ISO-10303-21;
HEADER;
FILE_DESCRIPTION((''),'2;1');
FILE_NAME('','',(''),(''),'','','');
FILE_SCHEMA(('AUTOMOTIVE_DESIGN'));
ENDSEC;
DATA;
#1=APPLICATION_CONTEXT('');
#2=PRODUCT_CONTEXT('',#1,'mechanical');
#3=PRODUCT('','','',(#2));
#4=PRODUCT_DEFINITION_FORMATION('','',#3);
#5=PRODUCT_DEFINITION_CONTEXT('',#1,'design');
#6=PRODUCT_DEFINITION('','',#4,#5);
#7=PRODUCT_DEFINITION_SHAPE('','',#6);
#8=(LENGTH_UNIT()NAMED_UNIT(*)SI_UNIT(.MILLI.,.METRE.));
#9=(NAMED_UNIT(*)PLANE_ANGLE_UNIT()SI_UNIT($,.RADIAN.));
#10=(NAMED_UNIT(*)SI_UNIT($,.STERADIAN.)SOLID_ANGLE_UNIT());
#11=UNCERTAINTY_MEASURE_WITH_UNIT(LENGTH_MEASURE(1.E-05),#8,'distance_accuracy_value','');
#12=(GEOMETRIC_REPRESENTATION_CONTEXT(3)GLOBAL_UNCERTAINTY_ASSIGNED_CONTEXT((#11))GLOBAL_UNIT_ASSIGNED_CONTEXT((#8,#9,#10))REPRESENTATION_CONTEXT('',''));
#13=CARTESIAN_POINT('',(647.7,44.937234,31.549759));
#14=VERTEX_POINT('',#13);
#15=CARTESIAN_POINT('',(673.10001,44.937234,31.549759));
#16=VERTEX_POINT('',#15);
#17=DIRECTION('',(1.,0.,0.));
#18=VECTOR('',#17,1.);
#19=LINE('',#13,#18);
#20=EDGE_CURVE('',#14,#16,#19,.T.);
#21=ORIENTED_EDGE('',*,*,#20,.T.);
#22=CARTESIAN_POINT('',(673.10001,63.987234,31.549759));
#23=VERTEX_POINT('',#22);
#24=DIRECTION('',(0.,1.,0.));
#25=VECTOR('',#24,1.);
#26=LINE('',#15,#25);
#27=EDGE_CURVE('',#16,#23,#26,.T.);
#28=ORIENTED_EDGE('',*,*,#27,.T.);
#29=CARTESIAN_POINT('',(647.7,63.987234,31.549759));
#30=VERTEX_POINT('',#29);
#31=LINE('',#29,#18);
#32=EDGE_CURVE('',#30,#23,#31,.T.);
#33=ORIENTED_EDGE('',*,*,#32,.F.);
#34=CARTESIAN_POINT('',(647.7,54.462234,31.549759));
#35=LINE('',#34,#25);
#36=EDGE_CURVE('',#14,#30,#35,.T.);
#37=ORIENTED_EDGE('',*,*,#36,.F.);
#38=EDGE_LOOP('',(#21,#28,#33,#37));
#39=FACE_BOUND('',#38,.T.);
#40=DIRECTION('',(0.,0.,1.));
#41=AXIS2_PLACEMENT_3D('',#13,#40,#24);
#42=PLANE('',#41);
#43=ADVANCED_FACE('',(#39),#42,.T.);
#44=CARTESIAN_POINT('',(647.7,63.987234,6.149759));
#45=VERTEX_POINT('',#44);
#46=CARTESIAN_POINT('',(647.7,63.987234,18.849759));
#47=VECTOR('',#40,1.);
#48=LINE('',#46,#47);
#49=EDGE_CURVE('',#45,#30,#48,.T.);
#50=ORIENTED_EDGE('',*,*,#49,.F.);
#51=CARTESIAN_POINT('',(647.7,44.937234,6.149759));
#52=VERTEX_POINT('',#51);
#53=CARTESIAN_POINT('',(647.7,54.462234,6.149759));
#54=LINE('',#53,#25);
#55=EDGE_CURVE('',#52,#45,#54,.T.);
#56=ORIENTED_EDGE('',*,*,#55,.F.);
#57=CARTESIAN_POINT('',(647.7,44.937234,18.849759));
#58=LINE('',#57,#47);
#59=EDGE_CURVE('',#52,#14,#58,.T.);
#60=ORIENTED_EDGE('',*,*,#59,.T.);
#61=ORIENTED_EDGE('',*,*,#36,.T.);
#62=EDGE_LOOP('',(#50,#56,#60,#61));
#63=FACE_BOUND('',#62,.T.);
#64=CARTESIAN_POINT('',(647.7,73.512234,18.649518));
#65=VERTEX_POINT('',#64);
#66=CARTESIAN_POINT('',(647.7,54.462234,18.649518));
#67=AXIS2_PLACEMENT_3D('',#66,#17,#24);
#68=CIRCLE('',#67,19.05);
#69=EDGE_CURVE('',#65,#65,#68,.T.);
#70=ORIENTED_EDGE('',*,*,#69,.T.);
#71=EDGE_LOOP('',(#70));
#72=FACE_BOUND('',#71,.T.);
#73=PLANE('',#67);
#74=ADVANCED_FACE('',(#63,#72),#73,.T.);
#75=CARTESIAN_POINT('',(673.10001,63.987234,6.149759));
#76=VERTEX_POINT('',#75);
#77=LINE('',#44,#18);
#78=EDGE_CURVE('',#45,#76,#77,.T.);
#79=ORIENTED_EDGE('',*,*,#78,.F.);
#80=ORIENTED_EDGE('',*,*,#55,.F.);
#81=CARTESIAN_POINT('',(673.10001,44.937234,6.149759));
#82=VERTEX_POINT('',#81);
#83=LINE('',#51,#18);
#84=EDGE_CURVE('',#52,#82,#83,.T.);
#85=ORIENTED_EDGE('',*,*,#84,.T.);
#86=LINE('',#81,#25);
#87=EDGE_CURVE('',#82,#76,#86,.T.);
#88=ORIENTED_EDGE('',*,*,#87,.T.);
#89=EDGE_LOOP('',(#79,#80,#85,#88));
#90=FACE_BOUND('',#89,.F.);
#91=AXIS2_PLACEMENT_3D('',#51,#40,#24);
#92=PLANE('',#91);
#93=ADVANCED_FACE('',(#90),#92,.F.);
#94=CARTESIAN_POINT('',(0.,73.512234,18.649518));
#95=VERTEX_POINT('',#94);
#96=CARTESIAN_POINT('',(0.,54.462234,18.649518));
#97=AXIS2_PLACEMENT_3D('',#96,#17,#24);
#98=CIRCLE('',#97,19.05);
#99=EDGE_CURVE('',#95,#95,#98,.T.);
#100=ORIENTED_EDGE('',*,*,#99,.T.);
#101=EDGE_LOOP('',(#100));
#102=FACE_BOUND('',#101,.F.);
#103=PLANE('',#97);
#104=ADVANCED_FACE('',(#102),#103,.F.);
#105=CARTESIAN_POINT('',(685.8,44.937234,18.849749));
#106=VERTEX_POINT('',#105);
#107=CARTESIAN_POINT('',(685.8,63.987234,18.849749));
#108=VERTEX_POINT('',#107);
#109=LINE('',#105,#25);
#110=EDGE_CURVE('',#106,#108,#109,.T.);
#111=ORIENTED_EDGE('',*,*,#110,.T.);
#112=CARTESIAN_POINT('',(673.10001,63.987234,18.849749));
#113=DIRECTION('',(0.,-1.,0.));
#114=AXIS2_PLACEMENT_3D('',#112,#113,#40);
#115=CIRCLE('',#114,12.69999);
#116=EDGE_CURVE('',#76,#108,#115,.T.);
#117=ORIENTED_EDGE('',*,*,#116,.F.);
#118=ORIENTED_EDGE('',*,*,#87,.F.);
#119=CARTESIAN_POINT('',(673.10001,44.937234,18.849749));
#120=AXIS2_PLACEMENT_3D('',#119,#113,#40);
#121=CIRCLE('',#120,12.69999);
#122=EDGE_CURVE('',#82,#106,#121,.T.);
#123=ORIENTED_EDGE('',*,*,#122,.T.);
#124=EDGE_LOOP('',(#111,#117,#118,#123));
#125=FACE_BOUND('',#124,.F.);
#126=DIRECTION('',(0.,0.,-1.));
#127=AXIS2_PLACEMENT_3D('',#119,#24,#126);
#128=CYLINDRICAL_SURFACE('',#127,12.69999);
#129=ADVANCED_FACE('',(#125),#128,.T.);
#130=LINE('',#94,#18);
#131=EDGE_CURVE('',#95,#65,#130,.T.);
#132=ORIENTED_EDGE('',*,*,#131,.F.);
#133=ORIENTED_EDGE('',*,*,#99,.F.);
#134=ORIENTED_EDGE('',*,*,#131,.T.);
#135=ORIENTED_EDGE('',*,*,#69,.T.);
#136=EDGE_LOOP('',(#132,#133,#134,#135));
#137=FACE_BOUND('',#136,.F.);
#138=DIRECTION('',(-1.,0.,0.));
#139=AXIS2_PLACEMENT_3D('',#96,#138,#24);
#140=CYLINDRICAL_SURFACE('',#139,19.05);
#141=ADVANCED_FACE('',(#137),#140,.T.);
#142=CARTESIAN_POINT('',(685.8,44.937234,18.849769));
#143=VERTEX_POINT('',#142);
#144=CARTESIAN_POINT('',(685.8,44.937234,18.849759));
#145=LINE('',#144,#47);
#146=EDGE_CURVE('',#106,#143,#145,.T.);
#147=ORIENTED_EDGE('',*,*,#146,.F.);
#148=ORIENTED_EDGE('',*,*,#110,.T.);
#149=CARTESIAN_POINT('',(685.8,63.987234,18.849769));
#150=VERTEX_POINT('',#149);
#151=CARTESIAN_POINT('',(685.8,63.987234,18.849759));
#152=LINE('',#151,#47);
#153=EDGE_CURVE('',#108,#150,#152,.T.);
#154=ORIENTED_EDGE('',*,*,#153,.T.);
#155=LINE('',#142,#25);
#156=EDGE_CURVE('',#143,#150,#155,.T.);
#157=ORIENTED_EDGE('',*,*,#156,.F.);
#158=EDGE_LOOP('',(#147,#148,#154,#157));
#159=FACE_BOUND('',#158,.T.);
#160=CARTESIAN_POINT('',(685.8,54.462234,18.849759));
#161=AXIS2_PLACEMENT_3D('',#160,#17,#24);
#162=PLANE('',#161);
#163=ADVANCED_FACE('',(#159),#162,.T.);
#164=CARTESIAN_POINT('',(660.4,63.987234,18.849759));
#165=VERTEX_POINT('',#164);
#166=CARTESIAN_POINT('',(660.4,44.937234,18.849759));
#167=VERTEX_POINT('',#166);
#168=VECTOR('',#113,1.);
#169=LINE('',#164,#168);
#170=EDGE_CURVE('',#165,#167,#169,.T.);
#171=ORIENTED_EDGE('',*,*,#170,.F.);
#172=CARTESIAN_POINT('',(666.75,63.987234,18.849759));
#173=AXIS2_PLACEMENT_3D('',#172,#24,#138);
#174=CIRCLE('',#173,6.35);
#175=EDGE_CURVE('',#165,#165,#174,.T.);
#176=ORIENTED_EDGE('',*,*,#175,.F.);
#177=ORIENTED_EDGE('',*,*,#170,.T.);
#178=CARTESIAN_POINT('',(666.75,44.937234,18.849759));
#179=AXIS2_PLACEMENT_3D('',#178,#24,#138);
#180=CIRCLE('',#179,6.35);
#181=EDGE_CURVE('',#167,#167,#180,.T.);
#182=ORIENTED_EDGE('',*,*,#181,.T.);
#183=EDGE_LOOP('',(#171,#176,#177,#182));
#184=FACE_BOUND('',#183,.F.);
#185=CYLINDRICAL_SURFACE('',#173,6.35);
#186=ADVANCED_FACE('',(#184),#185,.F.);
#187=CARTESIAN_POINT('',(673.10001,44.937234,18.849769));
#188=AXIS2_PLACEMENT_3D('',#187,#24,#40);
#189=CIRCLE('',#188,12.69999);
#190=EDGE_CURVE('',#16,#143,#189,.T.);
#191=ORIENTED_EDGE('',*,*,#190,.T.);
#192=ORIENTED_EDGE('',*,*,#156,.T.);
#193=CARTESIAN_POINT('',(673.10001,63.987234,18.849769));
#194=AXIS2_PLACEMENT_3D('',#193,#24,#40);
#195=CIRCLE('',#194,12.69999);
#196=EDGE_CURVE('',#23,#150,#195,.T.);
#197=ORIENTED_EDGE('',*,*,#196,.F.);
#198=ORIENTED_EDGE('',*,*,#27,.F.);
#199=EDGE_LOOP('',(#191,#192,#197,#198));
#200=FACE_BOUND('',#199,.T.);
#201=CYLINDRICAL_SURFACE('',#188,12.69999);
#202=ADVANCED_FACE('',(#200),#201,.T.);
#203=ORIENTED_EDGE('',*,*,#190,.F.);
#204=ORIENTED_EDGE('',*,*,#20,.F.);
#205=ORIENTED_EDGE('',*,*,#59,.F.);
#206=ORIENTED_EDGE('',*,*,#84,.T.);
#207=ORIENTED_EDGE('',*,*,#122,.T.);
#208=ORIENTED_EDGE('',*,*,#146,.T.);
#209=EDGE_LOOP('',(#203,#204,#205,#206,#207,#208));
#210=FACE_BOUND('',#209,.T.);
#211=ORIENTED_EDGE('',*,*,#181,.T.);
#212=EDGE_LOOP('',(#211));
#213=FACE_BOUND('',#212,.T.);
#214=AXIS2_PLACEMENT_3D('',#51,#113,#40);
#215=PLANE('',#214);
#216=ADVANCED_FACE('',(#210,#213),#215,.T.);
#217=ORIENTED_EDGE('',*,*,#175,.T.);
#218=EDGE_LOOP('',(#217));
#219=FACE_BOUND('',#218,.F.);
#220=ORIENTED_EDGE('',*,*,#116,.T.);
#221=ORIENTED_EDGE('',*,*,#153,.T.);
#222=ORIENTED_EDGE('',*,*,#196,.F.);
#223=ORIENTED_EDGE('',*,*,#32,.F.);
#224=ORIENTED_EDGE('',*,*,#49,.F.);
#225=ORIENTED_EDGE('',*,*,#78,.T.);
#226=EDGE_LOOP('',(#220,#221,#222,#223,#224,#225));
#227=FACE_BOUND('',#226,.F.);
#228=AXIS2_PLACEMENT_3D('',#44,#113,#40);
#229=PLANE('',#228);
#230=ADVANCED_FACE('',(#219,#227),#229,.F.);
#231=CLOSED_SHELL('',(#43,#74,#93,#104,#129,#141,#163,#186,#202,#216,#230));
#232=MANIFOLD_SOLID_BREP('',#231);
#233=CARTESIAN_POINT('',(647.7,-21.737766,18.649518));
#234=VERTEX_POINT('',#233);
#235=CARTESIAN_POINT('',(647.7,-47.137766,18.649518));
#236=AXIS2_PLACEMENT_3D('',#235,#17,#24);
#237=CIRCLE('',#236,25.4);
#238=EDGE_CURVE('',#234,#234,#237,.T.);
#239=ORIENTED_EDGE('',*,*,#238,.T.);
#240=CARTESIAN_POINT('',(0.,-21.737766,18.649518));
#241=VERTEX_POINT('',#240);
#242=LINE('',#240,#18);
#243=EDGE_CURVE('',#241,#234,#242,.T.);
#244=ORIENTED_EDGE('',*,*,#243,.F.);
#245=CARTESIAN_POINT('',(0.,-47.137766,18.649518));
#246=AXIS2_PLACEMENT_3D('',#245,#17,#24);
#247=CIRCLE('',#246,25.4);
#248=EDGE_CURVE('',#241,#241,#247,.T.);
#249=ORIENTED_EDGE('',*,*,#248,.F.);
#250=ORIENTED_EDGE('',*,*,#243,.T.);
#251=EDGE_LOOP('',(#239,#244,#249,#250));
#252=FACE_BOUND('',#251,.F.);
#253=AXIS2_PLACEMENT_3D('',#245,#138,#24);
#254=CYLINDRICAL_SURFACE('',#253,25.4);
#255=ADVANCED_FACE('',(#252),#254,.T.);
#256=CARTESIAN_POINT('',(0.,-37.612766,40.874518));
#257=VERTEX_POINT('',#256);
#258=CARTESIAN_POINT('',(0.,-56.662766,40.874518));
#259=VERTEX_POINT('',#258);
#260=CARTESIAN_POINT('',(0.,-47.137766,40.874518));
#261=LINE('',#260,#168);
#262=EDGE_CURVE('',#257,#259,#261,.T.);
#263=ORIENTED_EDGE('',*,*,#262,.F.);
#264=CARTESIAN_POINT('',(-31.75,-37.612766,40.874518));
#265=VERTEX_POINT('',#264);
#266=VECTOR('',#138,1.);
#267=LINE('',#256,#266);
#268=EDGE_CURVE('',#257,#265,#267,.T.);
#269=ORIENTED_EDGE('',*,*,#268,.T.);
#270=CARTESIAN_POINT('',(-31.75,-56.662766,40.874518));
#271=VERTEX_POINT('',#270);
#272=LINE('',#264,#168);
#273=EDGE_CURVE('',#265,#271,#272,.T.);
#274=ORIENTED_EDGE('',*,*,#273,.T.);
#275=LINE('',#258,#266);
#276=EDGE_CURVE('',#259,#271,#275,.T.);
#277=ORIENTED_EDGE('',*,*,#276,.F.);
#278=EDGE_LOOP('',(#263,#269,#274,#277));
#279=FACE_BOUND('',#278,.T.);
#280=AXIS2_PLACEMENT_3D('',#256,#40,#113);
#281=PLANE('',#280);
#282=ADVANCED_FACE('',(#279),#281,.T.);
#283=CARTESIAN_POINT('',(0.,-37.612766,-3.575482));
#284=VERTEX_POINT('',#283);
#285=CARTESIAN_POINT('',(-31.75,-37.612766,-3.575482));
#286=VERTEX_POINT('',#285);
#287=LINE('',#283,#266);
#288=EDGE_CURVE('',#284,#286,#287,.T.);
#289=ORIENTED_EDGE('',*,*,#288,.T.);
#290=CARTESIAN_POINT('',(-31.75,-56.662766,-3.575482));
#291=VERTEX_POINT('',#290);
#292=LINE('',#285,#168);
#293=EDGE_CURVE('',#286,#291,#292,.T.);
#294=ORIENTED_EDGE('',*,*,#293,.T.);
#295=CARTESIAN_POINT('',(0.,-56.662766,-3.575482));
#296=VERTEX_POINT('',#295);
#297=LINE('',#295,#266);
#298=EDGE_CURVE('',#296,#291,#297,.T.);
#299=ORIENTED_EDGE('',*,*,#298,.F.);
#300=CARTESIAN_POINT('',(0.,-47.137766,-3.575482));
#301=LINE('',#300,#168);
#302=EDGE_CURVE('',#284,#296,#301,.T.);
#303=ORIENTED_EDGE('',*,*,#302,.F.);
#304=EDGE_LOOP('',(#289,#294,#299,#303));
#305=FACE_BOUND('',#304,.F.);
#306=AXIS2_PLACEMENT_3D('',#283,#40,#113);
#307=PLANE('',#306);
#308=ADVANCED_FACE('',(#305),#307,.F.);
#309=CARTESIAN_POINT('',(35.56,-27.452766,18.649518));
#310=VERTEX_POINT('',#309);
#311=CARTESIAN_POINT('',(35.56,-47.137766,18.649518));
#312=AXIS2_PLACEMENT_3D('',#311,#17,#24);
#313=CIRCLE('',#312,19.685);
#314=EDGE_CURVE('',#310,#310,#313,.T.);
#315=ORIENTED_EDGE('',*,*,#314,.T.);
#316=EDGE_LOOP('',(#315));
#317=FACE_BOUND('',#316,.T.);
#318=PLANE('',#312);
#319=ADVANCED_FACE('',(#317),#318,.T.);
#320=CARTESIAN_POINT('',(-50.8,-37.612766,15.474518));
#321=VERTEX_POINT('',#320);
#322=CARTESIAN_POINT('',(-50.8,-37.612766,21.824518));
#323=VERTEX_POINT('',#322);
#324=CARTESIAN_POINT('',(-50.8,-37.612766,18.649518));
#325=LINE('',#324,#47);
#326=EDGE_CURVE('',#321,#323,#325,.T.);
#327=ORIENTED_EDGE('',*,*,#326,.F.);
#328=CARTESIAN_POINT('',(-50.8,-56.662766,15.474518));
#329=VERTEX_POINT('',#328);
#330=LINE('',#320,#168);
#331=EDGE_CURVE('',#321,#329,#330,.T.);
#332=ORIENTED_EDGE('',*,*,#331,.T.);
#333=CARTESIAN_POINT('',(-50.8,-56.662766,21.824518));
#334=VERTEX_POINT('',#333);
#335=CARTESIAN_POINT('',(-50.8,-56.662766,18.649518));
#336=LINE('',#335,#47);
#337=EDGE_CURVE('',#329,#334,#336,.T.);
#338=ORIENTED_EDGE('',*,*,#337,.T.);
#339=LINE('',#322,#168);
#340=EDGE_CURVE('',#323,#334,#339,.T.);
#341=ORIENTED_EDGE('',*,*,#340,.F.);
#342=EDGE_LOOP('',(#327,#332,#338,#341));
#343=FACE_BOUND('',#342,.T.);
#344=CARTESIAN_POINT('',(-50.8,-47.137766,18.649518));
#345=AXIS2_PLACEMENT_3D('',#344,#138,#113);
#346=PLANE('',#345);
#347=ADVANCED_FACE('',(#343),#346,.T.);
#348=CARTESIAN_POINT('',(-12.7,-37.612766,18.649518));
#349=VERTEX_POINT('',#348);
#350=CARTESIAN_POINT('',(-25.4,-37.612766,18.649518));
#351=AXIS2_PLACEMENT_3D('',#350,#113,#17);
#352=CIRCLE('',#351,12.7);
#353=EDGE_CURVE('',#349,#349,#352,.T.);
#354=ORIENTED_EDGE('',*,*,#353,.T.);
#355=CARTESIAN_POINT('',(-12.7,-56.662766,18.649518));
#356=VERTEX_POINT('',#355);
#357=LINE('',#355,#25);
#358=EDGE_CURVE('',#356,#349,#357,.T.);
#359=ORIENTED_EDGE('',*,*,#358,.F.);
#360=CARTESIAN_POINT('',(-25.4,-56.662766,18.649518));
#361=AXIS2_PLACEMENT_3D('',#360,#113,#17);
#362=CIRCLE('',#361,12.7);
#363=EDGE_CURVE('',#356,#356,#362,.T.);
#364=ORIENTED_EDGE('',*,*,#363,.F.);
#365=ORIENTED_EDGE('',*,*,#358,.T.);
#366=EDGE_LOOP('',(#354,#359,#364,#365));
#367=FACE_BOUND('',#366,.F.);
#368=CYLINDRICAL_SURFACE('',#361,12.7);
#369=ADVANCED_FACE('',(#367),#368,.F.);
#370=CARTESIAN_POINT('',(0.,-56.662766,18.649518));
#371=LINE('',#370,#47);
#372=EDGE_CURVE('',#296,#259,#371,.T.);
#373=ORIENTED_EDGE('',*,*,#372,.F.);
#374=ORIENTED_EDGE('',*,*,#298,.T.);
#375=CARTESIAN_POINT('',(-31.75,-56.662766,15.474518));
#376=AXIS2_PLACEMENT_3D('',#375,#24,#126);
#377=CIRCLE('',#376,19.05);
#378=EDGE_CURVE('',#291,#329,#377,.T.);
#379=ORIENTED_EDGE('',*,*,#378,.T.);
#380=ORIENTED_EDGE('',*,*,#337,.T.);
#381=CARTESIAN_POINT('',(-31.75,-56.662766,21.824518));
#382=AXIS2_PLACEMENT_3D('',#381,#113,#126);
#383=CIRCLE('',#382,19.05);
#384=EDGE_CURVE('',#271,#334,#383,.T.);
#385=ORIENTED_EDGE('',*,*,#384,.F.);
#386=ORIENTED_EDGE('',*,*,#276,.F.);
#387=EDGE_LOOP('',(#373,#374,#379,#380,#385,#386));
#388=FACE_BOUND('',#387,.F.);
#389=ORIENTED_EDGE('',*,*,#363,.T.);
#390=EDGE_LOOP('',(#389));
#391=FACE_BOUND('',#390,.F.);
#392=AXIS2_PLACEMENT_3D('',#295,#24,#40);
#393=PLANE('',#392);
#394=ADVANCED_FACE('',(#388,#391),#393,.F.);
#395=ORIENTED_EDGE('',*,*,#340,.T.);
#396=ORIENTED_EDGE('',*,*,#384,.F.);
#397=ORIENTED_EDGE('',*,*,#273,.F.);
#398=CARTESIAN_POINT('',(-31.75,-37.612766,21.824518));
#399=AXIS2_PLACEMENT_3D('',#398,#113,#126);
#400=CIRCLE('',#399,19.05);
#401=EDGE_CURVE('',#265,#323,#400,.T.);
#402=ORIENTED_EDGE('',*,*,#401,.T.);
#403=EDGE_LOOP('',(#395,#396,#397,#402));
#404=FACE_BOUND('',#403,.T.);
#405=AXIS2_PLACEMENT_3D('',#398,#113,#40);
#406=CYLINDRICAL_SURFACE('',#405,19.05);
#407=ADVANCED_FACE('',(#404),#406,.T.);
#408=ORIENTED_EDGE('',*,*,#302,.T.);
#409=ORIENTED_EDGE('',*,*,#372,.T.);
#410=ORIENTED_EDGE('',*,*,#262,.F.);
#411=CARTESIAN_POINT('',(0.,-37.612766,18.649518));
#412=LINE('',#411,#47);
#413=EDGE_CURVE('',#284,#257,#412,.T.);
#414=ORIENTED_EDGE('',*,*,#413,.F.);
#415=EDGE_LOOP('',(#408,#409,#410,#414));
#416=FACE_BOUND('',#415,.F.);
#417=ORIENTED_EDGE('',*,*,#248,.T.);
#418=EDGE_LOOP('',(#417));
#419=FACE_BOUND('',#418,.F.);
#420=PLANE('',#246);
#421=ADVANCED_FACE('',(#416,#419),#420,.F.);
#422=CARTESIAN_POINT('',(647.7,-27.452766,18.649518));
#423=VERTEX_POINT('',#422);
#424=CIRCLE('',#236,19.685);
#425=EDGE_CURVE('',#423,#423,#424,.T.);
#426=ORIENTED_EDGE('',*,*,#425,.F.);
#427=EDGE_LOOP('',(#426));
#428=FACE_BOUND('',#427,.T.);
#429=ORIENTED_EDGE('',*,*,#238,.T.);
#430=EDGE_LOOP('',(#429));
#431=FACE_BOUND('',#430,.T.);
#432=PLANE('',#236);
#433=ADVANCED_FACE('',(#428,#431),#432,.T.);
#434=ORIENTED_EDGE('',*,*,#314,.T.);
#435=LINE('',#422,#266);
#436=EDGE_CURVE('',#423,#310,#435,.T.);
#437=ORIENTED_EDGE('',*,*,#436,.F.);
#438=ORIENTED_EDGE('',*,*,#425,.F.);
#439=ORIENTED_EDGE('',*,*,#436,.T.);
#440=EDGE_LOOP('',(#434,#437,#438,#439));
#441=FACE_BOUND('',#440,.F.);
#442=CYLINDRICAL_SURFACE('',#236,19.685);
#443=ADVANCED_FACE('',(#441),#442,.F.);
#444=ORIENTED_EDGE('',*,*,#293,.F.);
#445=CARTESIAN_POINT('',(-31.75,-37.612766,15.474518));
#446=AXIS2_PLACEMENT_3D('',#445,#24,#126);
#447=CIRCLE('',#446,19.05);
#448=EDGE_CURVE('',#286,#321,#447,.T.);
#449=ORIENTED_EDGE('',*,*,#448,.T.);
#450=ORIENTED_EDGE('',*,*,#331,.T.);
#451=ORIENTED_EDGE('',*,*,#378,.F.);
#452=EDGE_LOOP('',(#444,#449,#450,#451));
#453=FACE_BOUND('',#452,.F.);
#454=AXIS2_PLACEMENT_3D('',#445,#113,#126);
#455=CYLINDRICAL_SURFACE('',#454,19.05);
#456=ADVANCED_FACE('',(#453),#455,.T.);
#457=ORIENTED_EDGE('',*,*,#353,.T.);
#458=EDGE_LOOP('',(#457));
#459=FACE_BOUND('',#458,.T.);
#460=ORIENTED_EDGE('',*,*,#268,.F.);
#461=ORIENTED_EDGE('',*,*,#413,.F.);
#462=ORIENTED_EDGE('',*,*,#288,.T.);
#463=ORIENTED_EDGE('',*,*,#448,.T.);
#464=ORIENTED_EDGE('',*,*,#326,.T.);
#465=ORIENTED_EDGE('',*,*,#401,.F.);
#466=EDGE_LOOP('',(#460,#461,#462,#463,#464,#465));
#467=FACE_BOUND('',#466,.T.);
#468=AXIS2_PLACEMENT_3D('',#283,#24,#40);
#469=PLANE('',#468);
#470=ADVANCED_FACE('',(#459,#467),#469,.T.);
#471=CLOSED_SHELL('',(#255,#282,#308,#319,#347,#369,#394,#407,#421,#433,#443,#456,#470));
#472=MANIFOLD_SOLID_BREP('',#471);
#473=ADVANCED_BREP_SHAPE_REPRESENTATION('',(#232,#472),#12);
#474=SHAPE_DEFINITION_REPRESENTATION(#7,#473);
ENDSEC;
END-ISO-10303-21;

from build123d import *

# Parameters (mm, degrees)
F0_R      = 25.4
F1_DEPTH  = 647.7
F0_R_2    = 19.05
F2_R      = 19.685
F3_DEPTH  = 612.14
F4_W      = 19.05
F4_H      = 44.45
F5_DEPTH  = 50.8
F6_R      = 12.7
F7_DEPTH  = 130.176
F8_R      = 19.05
F9_W      = 19.05
F9_H      = 25.4
F10_DEPTH = 38.1
F11_R     = 6.35
F12_DEPTH = 136.526
F13_R     = 12.69999


# Not quite as in the source:
# - a fillet or chamfer is up to 0.001 mm smaller than in the source, because OpenCascade refuses the exact size


with BuildPart() as f1:
    # F0 (on Right) → F1 (new body)
    with BuildSketch(Plane.YZ):
        with Locations((-47.1377661452, 18.6495184898)):
            Circle(F0_R)
    extrude(amount=F1_DEPTH)

    # F2 (on face) → F3 (cut)
    with BuildSketch(Plane.YZ.offset(647.7)):
        with Locations((-47.1377661452, 18.6495184898)):
            Circle(F2_R)
    extrude(amount=-F3_DEPTH, mode=Mode.SUBTRACT)

    # F4 (on face) → F5 (join)
    with BuildSketch(Plane(origin=(0, 0, 0), x_dir=(0, -1, 0), z_dir=(-1, 0, 0))):
        with Locations((47.1377661452, 18.6495184898)):
            Rectangle(F4_W, F4_H)
    extrude(amount=F5_DEPTH)

    # F6 (on face) → F7 (cut, through all)
    with BuildSketch(Plane.XZ.offset(56.6627661452)):
        with Locations((-25.4, 18.6495184898)):
            Circle(F6_R)
    extrude(amount=-F7_DEPTH, mode=Mode.SUBTRACT)

    # F8
    f8_edges = [f1.edges().sort_by_distance(p)[0] for p in [
        (-50.8, -47.137766, 40.874518),
        (-50.8, -47.137766, -3.575482),
    ]]
    fillet(f8_edges, radius=F8_R)


with BuildPart() as f1b:
    # F0 (on Right) → F1, piece 2 (new body)
    with BuildSketch(Plane.YZ):
        with Locations((54.4622338548, 18.6495184898)):
            Circle(F0_R_2)
    extrude(amount=F1_DEPTH)

    # F9 (on face) → F10 (join)
    with BuildSketch(Plane.YZ.offset(647.7)):
        with Locations((54.4622338548, 18.8497592449)):
            Rectangle(F9_W, F9_H)
    extrude(amount=F10_DEPTH)

    # F11 (on face) → F12 (cut, through all)
    with BuildSketch(Plane(origin=(0, 63.9872338548, 0), x_dir=(-1, 0, 0), z_dir=(0, 1, 0))):
        with Locations((-666.75, 18.8497592449)):
            Circle(F11_R)
    extrude(amount=-F12_DEPTH, mode=Mode.SUBTRACT)

    # F13 (radius 12.7 in the source; OpenCascade refuses exactly that, so slightly less here)
    f13_edges = [f1b.edges().sort_by_distance(p)[0] for p in [
        (685.8, 54.462234, 31.549759),
        (685.8, 54.462234, 6.149759),
    ]]
    fillet(f13_edges, radius=F13_R)


solid = Compound([f1.part, f1b.part])
